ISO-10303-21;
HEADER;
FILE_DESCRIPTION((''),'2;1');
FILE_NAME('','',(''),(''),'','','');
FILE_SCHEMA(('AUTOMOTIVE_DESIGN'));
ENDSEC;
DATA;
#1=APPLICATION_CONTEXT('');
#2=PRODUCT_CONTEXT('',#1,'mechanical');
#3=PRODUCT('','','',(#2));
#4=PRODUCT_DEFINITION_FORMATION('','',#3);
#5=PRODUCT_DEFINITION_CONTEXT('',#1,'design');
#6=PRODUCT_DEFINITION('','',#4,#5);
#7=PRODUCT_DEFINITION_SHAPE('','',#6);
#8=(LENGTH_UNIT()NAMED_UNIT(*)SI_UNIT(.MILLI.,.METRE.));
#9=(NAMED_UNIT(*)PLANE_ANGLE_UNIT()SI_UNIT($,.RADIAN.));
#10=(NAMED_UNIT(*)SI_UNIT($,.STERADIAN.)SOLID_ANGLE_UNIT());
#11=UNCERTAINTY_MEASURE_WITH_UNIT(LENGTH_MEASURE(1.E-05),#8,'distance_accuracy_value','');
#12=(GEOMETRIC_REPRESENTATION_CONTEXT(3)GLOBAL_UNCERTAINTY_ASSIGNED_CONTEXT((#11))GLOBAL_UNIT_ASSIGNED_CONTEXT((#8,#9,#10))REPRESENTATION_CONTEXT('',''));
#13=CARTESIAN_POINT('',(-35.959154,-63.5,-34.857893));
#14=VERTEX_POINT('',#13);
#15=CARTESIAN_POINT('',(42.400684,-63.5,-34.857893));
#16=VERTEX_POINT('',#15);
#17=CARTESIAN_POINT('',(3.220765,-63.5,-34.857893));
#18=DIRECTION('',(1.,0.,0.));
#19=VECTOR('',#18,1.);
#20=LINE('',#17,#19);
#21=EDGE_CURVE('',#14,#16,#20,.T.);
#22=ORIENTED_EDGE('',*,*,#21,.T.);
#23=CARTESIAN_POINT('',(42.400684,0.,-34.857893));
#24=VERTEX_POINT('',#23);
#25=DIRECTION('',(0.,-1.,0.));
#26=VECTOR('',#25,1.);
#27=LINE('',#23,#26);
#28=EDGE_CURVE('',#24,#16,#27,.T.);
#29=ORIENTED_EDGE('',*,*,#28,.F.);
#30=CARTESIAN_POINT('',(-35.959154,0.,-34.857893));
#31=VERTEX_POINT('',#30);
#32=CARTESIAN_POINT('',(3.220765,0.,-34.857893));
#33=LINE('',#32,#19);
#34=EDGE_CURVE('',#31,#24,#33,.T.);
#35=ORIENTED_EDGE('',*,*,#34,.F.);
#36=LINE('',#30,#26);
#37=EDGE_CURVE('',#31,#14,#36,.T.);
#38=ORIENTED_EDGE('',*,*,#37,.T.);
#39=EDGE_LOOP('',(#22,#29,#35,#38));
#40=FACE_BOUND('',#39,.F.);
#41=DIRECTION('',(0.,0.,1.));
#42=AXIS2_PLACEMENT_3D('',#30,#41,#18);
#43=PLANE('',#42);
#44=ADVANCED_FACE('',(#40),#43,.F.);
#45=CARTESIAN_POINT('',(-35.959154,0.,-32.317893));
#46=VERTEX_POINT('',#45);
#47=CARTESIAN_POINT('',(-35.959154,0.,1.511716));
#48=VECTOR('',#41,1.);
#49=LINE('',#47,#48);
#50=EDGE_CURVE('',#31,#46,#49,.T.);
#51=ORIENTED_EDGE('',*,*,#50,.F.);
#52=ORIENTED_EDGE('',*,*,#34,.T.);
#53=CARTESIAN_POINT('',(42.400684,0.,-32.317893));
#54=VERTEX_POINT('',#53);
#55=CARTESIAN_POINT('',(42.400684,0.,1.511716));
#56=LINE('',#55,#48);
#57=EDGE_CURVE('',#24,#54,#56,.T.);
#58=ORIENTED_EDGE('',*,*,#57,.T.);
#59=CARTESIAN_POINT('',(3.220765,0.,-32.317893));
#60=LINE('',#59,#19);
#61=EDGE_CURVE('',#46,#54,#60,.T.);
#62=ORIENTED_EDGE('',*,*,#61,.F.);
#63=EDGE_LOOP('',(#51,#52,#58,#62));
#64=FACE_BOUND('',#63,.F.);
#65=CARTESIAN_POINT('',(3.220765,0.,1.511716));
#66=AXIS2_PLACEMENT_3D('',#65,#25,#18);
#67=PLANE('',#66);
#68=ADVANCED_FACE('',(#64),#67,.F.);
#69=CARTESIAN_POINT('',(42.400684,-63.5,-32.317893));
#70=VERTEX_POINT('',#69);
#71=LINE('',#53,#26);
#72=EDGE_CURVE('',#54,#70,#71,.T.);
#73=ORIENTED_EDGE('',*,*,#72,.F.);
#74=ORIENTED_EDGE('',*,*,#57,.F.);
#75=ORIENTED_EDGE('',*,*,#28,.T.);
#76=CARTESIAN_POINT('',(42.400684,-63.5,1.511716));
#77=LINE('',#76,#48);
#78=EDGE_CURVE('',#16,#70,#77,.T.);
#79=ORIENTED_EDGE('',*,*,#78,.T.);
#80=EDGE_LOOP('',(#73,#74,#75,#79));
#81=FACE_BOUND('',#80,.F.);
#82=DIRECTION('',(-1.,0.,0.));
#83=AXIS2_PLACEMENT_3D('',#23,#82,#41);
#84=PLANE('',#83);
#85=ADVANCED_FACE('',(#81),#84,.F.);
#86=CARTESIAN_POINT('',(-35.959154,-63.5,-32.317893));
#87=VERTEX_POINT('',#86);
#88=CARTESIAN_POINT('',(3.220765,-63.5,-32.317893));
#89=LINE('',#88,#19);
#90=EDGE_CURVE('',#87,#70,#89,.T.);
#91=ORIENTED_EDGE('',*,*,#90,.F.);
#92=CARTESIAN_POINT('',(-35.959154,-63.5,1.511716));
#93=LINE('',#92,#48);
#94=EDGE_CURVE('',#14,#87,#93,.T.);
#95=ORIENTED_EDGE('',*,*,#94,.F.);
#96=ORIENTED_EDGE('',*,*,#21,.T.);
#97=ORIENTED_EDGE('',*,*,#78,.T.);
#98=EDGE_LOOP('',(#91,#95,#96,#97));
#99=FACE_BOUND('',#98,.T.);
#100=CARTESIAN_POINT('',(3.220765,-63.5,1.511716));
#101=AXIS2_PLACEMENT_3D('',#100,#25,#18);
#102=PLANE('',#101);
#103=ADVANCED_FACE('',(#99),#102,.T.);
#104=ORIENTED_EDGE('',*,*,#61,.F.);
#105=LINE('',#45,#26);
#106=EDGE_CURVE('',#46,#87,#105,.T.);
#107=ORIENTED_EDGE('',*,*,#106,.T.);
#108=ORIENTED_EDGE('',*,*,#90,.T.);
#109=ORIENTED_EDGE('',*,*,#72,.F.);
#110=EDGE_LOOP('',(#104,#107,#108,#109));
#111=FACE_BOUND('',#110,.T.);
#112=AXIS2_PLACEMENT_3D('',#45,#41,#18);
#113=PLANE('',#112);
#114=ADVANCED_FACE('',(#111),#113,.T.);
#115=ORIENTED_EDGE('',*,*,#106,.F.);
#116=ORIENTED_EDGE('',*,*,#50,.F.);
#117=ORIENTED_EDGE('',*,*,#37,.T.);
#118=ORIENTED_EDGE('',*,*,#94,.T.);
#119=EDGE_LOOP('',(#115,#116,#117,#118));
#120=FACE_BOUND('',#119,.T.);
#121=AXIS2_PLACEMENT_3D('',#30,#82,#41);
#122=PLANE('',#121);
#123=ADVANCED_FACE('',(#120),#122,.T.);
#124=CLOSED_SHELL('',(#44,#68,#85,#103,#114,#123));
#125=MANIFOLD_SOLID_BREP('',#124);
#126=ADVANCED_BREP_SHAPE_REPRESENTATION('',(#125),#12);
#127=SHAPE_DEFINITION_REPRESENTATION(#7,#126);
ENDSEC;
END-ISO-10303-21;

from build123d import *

# Parameters (mm, degrees)
F0_W     = 78.3598385751
F0_H     = 72.739217896
F0_R     = 13.705932092
F0_R_2   = 10.2154908805
F1_DEPTH = 63.5
F2_T     = 2.54


# Not quite as in the source:
# - a shell that OpenCascade refuses in one call is made with other operations: the cavity is built on its own and cut out


with BuildPart() as f1:
    # F0 (on Front) → F1 (new body)
    with BuildSketch(Plane.XZ):
        with Locations((3.2207649201, 1.5117155854)):
            Rectangle(F0_W, F0_H)
        with Locations((18.9568325877, -4.6814545058)):
            Circle(F0_R, mode=Mode.SUBTRACT)
        with Locations((-12.9959195619, 25.2717551775)):
            Circle(F0_R_2, mode=Mode.SUBTRACT)
        with Locations((18.9568325877, -4.6814545058)):
            Circle(F0_R)
    extrude(amount=F1_DEPTH)

    # F2: shell of thickness 2.54, made by hand


with BuildPart() as f2_core1:
    # F2_t2: copy of F1
    add(f1.part)

    # the walls: a layer under each face that stays
    f2_faces = [f2_core1.faces().sort_by_distance(p)[0] for p in [
        (3.2207649201, -31.75, -34.8578933626),
    ]]
    thicken(f2_faces, amount=-F2_T, mode=Mode.SUBTRACT)


with BuildPart() as f1_1:
    add(f1.part)

    # what is left inside the walls is the cavity
    f2_cavity = [f2_core1.part.solids().sort_by_distance(p)[0] for p in [
        (3.220765, -0.0254, -8.918154),
    ]]
    add(f2_cavity, mode=Mode.SUBTRACT)


solid = f1_1.part
